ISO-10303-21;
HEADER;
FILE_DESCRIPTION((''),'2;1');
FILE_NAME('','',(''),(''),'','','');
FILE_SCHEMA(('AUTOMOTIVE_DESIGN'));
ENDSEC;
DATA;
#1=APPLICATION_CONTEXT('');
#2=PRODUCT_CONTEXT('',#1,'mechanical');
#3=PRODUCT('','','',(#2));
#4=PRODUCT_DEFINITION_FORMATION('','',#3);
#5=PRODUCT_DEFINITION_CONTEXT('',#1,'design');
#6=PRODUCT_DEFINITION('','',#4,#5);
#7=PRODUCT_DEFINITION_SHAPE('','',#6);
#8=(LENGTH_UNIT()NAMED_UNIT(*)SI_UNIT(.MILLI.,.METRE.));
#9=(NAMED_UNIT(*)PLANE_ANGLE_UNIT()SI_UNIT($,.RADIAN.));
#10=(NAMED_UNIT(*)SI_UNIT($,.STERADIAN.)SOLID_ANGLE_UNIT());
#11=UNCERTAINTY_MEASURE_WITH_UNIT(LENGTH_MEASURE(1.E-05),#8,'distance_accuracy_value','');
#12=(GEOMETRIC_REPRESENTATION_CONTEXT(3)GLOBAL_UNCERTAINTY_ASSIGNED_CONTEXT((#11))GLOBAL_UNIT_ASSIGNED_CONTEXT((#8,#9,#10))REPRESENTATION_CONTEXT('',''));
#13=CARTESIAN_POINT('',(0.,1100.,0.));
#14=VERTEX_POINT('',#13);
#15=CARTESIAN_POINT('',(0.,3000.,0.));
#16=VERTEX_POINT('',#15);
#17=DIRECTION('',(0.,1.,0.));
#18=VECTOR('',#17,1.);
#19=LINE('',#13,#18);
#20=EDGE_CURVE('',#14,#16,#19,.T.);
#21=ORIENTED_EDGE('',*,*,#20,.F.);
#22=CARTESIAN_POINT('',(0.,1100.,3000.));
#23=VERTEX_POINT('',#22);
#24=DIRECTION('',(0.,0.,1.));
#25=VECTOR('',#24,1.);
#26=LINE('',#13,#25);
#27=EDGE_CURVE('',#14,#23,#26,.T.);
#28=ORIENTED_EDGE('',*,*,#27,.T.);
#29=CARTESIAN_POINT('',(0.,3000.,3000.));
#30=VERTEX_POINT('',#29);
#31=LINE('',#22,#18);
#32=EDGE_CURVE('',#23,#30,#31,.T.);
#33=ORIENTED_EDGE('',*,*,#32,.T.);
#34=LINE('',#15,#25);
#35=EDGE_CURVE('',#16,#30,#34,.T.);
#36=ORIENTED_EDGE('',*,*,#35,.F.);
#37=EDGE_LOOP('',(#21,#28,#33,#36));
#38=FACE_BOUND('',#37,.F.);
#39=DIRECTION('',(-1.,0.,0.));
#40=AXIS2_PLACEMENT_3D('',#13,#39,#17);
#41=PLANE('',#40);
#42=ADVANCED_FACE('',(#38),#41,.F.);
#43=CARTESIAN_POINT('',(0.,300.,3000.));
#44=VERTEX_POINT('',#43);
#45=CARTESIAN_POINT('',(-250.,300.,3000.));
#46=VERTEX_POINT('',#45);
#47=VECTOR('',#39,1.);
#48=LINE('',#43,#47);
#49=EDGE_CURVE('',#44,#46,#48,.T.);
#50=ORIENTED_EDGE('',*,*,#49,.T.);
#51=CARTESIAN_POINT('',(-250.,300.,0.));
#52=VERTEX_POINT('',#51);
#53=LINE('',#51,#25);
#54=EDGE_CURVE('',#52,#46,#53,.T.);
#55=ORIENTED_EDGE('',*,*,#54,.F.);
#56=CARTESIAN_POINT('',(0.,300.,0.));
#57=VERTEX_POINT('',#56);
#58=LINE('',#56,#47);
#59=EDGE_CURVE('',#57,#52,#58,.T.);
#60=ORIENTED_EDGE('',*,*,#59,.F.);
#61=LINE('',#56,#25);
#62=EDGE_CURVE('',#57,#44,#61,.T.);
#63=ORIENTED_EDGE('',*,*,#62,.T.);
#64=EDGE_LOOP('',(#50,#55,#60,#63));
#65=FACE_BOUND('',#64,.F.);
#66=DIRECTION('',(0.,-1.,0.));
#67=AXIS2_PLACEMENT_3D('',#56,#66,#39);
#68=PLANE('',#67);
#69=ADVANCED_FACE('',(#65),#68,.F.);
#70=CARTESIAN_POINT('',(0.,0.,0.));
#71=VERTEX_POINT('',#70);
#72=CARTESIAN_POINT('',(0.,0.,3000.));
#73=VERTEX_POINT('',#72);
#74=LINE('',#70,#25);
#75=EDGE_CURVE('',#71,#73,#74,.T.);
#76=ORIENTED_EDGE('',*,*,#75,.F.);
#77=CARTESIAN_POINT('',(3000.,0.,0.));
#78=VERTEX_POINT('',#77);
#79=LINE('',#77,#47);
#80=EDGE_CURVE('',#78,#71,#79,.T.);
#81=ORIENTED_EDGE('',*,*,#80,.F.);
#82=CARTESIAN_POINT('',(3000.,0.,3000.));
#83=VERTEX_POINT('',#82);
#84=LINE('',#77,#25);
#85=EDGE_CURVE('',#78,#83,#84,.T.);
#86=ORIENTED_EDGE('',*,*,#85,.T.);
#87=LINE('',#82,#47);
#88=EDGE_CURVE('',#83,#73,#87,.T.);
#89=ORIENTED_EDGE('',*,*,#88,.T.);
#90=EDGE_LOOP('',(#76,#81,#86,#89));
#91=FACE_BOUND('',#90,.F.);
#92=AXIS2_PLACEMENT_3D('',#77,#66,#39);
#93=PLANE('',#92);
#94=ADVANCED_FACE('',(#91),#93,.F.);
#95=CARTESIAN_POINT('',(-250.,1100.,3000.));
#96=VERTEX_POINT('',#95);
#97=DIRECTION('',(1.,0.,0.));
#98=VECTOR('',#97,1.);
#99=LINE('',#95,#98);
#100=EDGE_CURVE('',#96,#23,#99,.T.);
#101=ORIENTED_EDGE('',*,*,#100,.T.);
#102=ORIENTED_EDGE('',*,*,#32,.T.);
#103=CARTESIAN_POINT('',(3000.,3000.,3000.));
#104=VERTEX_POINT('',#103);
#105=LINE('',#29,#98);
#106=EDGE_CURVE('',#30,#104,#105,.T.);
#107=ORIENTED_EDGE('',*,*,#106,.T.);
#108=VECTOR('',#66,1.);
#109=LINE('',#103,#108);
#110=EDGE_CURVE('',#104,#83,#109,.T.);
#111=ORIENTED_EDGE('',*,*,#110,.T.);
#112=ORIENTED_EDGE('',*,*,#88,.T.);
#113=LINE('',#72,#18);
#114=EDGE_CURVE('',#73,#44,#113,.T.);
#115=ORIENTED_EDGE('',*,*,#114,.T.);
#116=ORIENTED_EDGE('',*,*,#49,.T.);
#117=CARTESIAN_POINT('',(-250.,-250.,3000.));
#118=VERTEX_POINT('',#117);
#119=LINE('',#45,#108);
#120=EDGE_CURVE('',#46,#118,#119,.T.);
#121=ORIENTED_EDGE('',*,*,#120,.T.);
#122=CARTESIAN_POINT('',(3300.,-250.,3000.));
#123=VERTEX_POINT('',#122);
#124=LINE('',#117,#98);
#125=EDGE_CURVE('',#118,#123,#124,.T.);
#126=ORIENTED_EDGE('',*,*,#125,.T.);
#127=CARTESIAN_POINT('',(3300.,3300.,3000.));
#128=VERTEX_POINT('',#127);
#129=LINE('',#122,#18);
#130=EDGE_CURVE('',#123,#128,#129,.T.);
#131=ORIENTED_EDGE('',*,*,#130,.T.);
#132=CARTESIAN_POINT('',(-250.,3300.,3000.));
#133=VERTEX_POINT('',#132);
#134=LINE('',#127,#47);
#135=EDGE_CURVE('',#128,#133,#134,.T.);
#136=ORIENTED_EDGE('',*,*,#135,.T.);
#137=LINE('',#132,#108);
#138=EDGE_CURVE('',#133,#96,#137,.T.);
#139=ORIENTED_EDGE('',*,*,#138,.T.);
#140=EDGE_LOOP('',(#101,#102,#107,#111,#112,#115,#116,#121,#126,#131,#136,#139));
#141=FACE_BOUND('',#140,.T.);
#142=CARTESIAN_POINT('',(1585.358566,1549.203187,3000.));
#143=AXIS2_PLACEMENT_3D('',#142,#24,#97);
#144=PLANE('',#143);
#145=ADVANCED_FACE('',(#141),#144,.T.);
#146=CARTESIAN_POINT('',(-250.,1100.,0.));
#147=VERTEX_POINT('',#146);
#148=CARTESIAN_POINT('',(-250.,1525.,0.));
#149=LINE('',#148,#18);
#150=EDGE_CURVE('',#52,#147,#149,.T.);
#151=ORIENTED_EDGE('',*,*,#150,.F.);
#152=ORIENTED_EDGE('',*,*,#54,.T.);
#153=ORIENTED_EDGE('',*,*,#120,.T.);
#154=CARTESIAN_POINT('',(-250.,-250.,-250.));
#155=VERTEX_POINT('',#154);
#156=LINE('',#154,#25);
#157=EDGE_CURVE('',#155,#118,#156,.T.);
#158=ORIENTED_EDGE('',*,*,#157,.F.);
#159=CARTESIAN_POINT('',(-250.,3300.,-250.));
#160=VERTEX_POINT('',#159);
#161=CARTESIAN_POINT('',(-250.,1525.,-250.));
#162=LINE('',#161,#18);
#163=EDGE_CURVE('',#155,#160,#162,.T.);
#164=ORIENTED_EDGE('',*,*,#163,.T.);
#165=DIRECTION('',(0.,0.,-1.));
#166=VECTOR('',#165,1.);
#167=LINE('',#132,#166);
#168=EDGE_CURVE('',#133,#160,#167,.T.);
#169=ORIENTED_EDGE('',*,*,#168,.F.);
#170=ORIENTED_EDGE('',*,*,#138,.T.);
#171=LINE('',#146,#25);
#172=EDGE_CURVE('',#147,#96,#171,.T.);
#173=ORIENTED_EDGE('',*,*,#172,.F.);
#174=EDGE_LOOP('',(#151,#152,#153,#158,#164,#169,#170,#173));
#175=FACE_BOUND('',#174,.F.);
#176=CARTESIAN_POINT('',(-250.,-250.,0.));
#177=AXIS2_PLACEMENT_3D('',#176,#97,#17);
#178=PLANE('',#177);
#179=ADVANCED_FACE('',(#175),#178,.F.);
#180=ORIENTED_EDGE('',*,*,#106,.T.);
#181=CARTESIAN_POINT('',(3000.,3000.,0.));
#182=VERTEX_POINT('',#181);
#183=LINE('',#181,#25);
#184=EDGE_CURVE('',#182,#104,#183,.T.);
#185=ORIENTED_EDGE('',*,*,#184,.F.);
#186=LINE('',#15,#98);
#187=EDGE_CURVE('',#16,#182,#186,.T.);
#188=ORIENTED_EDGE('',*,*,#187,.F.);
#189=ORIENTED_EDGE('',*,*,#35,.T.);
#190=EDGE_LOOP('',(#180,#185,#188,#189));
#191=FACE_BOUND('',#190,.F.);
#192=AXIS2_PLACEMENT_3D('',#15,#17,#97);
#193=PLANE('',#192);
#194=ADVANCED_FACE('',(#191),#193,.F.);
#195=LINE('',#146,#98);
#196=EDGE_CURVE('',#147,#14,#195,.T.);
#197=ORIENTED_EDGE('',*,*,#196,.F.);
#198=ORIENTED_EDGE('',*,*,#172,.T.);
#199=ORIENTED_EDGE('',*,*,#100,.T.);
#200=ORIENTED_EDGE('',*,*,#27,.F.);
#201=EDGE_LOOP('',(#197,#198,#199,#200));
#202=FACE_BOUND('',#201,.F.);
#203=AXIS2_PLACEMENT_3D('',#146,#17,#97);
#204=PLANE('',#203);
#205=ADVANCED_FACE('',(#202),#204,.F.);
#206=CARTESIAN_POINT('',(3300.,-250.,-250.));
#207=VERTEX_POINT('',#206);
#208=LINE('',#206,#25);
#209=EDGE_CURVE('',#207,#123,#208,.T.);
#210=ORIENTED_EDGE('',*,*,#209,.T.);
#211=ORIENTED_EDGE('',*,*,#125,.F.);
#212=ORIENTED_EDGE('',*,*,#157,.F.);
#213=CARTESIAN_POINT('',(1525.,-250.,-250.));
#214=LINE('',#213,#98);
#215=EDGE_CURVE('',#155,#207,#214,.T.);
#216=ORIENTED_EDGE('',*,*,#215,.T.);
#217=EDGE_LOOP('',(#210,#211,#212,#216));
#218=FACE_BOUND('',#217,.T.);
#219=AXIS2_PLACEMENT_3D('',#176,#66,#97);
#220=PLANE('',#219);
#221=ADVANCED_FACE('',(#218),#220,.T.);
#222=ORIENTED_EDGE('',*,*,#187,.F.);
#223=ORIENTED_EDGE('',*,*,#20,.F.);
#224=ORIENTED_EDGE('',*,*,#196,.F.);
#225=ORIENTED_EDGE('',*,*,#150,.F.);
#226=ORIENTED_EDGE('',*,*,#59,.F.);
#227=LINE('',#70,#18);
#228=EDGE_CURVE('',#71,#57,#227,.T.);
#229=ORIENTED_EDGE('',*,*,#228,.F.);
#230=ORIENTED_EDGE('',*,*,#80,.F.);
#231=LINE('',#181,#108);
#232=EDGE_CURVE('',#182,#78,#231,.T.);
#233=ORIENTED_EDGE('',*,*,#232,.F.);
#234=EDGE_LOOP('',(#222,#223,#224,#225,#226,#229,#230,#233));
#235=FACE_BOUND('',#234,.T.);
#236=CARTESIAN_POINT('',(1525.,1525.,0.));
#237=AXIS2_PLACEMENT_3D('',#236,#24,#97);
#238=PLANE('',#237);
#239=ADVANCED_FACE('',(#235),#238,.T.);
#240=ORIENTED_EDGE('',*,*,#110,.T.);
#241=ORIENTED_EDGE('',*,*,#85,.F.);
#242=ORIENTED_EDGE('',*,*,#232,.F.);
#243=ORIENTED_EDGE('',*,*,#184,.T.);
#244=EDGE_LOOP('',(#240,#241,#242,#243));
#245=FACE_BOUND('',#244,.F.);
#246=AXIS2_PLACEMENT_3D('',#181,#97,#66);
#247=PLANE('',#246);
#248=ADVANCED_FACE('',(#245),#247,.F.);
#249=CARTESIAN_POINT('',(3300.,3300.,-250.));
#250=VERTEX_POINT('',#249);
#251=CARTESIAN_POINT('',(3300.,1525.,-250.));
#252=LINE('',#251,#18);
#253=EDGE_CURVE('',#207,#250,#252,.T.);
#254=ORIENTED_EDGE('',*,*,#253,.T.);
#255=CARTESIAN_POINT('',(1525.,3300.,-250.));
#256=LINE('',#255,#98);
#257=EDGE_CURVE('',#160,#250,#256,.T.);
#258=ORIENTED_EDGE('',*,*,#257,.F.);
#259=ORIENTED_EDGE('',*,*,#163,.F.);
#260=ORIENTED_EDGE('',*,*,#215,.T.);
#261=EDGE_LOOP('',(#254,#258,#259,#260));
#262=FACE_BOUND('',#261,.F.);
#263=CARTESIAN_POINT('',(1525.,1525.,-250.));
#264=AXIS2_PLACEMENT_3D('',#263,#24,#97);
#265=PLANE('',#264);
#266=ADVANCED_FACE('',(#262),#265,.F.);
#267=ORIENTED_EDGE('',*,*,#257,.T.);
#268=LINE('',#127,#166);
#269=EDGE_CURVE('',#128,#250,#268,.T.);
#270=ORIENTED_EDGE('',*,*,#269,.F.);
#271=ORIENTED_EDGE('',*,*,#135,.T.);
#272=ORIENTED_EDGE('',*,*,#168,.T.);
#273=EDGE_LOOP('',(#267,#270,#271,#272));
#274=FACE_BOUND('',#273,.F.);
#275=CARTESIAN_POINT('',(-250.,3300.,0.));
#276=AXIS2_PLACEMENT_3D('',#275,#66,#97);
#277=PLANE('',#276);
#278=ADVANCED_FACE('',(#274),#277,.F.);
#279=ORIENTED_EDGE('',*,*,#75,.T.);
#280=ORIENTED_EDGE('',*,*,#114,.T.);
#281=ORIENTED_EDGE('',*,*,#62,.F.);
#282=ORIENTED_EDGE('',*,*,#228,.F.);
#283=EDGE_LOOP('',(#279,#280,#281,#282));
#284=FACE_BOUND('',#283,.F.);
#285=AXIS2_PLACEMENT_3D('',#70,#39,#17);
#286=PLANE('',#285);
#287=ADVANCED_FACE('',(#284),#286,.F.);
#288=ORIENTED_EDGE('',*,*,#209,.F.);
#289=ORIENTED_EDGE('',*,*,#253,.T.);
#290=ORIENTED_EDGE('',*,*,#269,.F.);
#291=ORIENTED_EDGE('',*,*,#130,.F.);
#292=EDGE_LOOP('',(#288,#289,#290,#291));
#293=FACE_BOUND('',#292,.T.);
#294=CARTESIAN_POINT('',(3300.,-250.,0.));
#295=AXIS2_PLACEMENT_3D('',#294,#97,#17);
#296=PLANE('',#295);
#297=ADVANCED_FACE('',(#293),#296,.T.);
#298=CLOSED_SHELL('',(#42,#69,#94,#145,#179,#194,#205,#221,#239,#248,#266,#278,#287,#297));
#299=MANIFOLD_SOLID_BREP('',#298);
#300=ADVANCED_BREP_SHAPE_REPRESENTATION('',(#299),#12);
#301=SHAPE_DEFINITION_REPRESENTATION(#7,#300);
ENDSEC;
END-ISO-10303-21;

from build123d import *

# Parameters (mm, degrees)
F1_DEPTH = 3000
F2_W     = 3550
F2_H     = 3550
F3_DEPTH = 250


# Not quite as in the source:
# - a feature names something its author has since deleted; it is built from what else it names


with BuildPart() as f1:
    # F0 (on Top) → F1 (new body)
    with BuildSketch(Plane.XY):
        Polygon((3000, 0), (0, 0), (0, 300), (-250, 300), (-250, -250), (3300, -250), (3300, 3300), (-250, 3300), (-250, 1100), (0, 1100), (0, 3000), (3000, 3000), align=None)
    extrude(amount=F1_DEPTH)

    # F2 (on Top) → F3 (join)
    with BuildSketch(Plane.XY):
        with Locations((1525, 1525)):
            Rectangle(F2_W, F2_H)
    extrude(amount=-F3_DEPTH)


solid = f1.part
